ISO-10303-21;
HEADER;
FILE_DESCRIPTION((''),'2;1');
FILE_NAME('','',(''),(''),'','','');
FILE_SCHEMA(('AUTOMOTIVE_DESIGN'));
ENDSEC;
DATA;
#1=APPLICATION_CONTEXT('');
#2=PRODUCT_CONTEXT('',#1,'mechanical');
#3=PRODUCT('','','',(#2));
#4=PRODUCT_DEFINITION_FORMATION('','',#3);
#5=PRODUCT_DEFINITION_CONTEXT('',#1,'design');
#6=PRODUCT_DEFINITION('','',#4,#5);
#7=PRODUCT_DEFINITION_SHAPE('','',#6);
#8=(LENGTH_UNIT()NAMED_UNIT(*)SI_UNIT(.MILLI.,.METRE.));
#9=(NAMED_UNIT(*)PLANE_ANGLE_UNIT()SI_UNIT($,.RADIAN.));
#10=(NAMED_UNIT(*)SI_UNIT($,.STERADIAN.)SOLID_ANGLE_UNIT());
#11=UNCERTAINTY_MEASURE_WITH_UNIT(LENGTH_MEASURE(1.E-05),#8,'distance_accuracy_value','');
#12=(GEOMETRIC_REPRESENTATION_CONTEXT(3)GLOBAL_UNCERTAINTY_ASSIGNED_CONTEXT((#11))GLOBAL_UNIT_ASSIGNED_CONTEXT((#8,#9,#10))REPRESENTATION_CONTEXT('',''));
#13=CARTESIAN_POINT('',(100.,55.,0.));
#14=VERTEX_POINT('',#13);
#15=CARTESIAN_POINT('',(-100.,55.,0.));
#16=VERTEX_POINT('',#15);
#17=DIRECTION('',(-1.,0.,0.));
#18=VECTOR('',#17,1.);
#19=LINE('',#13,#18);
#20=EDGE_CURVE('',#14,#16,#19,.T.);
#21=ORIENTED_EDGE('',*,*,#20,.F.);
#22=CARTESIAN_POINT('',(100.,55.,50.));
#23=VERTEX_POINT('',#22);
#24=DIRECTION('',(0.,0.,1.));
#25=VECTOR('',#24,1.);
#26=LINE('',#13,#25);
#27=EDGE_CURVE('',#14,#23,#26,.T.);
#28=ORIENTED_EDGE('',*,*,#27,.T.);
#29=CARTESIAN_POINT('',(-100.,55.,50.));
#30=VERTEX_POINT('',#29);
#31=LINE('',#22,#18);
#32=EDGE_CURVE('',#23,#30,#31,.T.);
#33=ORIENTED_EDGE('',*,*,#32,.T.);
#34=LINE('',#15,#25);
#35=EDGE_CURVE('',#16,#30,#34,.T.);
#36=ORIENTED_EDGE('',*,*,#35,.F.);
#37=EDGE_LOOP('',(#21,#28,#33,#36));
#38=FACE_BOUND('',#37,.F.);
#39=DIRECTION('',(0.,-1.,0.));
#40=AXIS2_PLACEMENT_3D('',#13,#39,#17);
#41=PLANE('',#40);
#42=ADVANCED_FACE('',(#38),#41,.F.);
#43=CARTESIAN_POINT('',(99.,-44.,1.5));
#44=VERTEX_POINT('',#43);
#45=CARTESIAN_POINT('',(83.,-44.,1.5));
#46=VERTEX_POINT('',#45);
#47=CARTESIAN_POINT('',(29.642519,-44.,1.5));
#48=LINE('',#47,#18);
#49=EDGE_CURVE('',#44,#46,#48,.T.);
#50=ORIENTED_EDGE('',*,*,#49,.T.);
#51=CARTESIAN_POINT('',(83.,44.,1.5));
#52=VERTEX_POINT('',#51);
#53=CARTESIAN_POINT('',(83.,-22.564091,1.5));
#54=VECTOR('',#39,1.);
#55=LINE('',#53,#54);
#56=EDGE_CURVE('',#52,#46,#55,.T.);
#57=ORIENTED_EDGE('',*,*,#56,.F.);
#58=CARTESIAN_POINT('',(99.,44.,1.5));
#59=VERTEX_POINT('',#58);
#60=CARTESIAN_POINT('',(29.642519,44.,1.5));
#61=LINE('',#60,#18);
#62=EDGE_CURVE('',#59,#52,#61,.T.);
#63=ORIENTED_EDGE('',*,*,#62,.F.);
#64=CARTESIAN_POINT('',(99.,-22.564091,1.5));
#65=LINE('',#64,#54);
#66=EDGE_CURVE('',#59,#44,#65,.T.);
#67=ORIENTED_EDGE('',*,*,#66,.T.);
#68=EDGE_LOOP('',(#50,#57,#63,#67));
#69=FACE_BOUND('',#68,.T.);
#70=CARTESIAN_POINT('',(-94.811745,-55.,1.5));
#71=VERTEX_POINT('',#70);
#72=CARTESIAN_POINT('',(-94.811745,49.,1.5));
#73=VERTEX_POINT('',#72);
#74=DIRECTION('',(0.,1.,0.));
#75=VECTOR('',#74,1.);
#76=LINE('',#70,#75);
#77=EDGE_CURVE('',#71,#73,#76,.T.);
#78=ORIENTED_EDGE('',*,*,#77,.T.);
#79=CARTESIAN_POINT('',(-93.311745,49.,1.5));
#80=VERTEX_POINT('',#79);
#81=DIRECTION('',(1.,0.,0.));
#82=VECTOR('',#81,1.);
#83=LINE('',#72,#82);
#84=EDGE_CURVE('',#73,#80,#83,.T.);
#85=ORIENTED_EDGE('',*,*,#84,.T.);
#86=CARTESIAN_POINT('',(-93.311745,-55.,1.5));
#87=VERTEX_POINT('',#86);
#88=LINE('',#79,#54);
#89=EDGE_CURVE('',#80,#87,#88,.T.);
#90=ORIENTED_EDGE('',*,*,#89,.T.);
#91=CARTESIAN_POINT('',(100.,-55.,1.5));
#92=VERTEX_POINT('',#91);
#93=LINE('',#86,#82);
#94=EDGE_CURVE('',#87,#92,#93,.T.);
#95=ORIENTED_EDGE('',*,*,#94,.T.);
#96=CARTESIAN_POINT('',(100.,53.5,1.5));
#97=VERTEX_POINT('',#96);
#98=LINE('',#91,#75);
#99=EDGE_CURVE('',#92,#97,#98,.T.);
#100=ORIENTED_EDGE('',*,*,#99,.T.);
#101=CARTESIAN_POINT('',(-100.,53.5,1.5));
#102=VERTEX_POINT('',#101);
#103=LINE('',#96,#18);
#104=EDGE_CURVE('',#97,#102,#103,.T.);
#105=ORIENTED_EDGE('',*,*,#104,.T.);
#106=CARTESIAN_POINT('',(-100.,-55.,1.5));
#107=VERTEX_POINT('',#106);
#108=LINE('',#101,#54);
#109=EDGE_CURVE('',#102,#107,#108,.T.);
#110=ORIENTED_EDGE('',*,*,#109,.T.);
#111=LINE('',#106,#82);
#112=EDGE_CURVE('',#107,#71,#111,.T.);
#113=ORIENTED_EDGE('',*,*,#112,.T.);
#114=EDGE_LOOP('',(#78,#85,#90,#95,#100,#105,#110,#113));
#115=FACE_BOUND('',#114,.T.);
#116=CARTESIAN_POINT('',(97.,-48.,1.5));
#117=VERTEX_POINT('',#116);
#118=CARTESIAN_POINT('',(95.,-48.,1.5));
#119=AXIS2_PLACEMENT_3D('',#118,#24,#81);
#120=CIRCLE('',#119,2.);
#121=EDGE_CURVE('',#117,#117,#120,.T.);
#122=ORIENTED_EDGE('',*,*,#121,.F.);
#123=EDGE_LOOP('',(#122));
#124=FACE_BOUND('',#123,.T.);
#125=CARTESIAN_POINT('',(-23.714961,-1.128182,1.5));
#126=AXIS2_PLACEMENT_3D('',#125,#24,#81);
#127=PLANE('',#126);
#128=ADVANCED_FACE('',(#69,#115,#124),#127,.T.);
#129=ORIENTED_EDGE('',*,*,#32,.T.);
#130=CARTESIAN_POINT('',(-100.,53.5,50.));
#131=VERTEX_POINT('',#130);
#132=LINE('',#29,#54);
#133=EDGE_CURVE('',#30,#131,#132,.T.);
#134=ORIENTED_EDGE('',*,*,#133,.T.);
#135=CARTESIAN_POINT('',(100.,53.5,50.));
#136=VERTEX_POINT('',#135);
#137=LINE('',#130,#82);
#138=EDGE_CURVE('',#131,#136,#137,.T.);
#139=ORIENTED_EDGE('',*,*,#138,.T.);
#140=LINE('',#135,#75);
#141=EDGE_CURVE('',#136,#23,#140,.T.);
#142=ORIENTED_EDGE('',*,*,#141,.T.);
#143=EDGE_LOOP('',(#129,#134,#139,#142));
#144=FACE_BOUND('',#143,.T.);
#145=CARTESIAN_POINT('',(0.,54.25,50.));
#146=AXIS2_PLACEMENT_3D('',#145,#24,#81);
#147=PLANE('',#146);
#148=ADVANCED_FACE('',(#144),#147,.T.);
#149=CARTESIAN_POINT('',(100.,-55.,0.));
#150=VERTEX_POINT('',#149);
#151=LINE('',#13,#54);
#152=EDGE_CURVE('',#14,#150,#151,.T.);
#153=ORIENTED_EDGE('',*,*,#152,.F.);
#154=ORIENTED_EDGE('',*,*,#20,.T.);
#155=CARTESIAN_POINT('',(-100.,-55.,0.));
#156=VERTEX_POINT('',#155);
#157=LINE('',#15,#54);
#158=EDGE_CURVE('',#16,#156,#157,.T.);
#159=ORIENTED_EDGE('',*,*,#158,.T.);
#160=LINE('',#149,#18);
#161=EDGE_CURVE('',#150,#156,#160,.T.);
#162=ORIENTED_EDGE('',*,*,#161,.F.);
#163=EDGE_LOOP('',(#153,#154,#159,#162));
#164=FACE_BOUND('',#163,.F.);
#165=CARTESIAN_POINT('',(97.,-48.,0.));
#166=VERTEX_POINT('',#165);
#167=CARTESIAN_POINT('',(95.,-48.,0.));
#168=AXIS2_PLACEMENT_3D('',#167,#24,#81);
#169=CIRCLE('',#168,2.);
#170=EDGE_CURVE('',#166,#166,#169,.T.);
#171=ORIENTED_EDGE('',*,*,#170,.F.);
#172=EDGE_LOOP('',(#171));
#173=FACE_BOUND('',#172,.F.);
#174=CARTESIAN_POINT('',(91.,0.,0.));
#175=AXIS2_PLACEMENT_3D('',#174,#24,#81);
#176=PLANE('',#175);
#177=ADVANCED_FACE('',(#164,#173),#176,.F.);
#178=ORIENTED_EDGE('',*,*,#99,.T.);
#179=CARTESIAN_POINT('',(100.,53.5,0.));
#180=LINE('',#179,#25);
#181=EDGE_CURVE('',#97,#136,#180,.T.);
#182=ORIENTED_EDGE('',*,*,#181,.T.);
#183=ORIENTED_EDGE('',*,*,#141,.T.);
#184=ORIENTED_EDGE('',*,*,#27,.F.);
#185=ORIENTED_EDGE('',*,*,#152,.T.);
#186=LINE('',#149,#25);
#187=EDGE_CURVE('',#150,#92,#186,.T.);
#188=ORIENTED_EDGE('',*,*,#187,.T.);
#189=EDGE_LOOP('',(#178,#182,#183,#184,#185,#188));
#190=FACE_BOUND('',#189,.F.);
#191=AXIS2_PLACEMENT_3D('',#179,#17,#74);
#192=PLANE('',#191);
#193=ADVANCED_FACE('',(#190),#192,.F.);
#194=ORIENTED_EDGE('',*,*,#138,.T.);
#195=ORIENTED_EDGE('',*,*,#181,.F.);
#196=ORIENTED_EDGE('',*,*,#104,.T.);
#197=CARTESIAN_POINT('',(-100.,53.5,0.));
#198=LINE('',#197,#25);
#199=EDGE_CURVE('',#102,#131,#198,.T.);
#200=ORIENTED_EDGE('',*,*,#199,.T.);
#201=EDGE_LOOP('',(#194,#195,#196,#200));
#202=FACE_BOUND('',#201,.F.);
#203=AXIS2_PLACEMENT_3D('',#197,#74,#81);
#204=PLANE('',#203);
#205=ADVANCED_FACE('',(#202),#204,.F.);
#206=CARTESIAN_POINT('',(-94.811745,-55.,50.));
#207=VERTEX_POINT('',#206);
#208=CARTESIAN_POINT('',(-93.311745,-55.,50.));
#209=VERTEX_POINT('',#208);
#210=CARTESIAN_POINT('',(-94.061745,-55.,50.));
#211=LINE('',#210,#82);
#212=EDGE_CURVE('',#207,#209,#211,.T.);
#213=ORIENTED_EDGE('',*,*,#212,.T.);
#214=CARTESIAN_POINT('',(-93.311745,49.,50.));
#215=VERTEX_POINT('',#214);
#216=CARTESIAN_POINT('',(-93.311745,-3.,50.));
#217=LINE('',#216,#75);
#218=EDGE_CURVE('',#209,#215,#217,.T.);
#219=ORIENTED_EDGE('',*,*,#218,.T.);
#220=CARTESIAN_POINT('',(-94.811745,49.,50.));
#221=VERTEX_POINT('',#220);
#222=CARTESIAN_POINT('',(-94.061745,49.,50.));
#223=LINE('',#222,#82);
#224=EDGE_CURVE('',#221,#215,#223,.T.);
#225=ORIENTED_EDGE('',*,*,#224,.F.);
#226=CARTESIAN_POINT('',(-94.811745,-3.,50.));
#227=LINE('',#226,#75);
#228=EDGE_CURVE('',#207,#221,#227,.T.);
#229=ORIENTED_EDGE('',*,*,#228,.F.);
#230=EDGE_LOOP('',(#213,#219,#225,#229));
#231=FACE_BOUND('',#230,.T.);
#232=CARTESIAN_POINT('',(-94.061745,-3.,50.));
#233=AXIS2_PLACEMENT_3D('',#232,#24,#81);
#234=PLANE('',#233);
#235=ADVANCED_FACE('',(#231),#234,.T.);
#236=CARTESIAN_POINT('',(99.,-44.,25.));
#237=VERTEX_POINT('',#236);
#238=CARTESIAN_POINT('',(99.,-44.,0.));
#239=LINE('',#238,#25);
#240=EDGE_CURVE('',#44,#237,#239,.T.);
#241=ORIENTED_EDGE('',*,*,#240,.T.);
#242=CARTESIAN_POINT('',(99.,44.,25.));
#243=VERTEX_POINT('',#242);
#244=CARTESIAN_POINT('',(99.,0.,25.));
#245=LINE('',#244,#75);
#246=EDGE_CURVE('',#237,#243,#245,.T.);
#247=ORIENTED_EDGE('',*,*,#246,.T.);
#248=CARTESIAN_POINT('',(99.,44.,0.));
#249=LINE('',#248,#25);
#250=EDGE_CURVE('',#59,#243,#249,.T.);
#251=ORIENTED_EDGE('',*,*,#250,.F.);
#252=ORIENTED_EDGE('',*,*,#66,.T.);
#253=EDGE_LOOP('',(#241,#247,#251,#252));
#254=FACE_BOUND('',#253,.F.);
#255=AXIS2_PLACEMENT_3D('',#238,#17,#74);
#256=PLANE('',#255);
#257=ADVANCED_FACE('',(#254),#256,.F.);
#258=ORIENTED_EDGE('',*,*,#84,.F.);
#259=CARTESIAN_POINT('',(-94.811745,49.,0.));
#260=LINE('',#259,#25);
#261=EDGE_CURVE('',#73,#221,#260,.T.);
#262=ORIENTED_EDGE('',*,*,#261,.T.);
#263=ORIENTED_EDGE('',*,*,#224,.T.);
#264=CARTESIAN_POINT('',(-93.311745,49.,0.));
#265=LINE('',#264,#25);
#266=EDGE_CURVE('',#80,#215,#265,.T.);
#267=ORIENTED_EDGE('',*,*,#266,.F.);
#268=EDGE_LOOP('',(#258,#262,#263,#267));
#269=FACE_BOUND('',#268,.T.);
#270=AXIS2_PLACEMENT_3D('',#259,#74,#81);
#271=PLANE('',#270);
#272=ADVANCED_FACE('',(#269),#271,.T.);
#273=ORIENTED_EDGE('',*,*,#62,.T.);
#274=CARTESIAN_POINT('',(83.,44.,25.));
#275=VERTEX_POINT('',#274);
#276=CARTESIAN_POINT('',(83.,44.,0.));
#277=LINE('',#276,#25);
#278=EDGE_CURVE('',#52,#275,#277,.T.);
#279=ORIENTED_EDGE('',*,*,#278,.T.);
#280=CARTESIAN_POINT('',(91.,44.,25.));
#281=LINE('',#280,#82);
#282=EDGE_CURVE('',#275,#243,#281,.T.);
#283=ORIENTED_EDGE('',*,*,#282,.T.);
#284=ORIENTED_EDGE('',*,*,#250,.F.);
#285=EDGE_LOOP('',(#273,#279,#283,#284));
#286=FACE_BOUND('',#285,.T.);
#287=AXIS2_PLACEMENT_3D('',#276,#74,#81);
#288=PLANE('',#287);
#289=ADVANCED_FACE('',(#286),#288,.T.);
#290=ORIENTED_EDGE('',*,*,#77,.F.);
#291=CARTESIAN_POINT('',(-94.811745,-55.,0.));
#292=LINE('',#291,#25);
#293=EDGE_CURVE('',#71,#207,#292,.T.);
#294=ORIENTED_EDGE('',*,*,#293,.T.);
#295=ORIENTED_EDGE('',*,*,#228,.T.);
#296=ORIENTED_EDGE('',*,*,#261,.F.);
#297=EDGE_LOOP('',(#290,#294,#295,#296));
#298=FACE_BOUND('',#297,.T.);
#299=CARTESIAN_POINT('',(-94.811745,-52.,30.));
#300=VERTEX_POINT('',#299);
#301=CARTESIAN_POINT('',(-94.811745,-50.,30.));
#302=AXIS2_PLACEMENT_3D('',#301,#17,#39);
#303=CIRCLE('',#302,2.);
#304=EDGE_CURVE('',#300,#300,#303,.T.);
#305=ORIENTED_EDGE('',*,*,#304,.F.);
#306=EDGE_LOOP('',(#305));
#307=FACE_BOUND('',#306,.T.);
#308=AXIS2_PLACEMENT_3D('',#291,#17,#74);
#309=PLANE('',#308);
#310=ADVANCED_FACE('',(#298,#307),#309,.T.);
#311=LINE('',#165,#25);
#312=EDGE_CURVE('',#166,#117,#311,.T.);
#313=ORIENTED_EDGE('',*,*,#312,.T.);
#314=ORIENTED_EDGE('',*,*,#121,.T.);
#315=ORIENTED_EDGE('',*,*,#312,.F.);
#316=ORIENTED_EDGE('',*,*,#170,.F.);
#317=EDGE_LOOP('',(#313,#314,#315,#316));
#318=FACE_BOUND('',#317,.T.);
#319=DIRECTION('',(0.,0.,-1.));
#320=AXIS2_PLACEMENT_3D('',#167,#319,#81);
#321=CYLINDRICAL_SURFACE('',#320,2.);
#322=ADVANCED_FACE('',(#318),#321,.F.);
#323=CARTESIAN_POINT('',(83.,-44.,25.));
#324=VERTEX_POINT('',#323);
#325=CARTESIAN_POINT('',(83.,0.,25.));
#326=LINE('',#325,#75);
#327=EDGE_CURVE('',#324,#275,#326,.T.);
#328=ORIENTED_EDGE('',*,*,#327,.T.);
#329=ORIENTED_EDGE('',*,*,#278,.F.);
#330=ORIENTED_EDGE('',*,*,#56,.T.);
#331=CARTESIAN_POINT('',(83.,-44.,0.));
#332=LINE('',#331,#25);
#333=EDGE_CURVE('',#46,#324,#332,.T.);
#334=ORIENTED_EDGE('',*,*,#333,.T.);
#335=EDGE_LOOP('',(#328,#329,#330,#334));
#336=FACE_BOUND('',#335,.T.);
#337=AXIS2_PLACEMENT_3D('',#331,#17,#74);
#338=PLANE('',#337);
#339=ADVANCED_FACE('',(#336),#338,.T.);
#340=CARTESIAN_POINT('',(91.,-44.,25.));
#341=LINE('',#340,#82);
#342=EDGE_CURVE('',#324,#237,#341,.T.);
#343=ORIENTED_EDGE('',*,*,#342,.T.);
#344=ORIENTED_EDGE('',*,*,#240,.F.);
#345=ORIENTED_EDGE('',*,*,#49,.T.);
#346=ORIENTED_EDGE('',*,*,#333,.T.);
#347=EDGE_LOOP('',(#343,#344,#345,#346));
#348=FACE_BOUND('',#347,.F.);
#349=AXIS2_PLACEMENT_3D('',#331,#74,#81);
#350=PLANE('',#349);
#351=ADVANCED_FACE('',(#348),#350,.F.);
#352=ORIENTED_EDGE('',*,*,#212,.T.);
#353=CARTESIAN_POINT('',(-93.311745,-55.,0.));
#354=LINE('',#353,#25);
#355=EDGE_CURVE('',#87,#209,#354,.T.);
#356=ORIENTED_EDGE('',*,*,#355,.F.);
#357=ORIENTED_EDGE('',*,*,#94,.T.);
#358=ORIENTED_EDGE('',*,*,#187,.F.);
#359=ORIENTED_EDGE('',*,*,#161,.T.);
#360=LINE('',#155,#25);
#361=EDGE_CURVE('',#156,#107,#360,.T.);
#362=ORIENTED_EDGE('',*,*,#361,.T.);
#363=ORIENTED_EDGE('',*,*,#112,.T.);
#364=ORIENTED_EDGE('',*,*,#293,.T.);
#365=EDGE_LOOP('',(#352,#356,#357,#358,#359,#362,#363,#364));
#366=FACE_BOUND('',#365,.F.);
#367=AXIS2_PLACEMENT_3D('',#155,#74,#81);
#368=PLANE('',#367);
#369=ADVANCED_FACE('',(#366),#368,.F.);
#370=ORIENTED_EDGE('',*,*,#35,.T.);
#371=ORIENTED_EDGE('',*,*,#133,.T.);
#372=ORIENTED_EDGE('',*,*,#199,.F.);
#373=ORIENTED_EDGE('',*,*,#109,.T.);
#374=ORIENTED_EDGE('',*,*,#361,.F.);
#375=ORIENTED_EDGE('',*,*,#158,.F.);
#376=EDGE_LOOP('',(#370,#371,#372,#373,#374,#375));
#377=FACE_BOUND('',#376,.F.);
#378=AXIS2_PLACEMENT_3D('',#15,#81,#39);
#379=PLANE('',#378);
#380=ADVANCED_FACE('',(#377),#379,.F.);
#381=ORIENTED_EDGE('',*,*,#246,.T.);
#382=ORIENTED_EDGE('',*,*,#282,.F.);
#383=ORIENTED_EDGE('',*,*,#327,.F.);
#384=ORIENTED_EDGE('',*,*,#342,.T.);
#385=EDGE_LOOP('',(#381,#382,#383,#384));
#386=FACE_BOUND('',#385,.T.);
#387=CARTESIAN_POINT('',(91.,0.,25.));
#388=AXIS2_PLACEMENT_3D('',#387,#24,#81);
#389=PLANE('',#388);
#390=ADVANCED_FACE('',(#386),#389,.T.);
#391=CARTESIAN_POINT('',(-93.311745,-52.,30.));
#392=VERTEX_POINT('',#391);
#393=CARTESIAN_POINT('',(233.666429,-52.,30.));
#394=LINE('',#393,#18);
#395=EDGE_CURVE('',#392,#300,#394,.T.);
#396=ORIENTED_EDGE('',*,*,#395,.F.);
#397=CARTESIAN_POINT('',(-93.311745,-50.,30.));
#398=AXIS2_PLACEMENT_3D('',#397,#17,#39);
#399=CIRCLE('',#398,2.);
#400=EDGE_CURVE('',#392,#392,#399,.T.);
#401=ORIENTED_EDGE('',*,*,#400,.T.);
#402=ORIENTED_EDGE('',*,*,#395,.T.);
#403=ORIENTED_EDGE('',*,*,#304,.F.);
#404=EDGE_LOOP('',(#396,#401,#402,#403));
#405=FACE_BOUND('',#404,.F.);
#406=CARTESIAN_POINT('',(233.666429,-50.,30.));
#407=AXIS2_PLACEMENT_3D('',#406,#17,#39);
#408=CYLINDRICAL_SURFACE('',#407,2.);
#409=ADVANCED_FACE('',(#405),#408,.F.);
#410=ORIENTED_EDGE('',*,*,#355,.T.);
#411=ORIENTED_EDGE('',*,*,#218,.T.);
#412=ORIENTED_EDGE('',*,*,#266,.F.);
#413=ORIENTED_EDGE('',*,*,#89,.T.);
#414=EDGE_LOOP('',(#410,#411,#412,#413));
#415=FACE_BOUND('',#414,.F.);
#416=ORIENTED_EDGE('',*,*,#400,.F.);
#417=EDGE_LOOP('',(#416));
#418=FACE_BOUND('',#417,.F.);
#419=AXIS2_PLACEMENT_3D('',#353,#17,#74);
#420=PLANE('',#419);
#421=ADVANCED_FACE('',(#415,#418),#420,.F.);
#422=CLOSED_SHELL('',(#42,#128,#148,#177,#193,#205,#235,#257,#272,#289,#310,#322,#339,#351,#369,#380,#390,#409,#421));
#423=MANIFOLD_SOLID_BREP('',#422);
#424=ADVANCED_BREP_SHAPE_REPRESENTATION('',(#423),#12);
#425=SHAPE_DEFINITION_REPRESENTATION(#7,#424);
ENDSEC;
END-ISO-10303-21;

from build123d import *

# Parameters (mm, degrees)
F0_R     = 2
F0_W     = 16
F0_H     = 88
F2_DEPTH = 1.5
F0_W_2   = 1.5
F0_H_2   = 104
F3_DEPTH = 50
F4_DEPTH = 25
F5_D     = 4


# Not quite as in the source:
# - the program builds the solid bodies; features that only make, move or delete a surface that nothing else refers to are left out


with BuildPart() as f2:
    # F0 (on Top) → F2 (new body)
    with BuildSketch(Plane.XY):
        Polygon((100, 53.5), (-100, 53.5), (-100, -55), (-94.811744988, -55), (-94.811744988, 49), (-93.311744988, 49), (-93.311744988, -55), (100, -55), align=None)
        with Locations((95, -48)):
            Circle(F0_R, mode=Mode.SUBTRACT)
        with Locations((91, 0)):
            Rectangle(F0_W, F0_H, mode=Mode.SUBTRACT)
        with Locations((91, 0)):
            Rectangle(F0_W, F0_H)
    extrude(amount=F2_DEPTH)

    # F0 (on Top) → F3 (join)
    with BuildSketch(Plane.XY):
        Polygon((-58.6367584765, 55), (-100, 55), (-100, 53.5), (100, 53.5), (100, 55), (72.2615793347, 55), align=None)
        with Locations((-94.061744988, -3)):
            Rectangle(F0_W_2, F0_H_2)
    extrude(amount=F3_DEPTH)

    # F0 (on Top) → F4 (join)
    with BuildSketch(Plane.XY):
        with Locations((91, 0)):
            Rectangle(F0_W, F0_H)
    extrude(amount=F4_DEPTH)

    # F5 (through all)
    with Locations(Plane.YZ):
        with Locations((-50, 30)):
            Hole(F5_D / 2)


solid = f2.part
